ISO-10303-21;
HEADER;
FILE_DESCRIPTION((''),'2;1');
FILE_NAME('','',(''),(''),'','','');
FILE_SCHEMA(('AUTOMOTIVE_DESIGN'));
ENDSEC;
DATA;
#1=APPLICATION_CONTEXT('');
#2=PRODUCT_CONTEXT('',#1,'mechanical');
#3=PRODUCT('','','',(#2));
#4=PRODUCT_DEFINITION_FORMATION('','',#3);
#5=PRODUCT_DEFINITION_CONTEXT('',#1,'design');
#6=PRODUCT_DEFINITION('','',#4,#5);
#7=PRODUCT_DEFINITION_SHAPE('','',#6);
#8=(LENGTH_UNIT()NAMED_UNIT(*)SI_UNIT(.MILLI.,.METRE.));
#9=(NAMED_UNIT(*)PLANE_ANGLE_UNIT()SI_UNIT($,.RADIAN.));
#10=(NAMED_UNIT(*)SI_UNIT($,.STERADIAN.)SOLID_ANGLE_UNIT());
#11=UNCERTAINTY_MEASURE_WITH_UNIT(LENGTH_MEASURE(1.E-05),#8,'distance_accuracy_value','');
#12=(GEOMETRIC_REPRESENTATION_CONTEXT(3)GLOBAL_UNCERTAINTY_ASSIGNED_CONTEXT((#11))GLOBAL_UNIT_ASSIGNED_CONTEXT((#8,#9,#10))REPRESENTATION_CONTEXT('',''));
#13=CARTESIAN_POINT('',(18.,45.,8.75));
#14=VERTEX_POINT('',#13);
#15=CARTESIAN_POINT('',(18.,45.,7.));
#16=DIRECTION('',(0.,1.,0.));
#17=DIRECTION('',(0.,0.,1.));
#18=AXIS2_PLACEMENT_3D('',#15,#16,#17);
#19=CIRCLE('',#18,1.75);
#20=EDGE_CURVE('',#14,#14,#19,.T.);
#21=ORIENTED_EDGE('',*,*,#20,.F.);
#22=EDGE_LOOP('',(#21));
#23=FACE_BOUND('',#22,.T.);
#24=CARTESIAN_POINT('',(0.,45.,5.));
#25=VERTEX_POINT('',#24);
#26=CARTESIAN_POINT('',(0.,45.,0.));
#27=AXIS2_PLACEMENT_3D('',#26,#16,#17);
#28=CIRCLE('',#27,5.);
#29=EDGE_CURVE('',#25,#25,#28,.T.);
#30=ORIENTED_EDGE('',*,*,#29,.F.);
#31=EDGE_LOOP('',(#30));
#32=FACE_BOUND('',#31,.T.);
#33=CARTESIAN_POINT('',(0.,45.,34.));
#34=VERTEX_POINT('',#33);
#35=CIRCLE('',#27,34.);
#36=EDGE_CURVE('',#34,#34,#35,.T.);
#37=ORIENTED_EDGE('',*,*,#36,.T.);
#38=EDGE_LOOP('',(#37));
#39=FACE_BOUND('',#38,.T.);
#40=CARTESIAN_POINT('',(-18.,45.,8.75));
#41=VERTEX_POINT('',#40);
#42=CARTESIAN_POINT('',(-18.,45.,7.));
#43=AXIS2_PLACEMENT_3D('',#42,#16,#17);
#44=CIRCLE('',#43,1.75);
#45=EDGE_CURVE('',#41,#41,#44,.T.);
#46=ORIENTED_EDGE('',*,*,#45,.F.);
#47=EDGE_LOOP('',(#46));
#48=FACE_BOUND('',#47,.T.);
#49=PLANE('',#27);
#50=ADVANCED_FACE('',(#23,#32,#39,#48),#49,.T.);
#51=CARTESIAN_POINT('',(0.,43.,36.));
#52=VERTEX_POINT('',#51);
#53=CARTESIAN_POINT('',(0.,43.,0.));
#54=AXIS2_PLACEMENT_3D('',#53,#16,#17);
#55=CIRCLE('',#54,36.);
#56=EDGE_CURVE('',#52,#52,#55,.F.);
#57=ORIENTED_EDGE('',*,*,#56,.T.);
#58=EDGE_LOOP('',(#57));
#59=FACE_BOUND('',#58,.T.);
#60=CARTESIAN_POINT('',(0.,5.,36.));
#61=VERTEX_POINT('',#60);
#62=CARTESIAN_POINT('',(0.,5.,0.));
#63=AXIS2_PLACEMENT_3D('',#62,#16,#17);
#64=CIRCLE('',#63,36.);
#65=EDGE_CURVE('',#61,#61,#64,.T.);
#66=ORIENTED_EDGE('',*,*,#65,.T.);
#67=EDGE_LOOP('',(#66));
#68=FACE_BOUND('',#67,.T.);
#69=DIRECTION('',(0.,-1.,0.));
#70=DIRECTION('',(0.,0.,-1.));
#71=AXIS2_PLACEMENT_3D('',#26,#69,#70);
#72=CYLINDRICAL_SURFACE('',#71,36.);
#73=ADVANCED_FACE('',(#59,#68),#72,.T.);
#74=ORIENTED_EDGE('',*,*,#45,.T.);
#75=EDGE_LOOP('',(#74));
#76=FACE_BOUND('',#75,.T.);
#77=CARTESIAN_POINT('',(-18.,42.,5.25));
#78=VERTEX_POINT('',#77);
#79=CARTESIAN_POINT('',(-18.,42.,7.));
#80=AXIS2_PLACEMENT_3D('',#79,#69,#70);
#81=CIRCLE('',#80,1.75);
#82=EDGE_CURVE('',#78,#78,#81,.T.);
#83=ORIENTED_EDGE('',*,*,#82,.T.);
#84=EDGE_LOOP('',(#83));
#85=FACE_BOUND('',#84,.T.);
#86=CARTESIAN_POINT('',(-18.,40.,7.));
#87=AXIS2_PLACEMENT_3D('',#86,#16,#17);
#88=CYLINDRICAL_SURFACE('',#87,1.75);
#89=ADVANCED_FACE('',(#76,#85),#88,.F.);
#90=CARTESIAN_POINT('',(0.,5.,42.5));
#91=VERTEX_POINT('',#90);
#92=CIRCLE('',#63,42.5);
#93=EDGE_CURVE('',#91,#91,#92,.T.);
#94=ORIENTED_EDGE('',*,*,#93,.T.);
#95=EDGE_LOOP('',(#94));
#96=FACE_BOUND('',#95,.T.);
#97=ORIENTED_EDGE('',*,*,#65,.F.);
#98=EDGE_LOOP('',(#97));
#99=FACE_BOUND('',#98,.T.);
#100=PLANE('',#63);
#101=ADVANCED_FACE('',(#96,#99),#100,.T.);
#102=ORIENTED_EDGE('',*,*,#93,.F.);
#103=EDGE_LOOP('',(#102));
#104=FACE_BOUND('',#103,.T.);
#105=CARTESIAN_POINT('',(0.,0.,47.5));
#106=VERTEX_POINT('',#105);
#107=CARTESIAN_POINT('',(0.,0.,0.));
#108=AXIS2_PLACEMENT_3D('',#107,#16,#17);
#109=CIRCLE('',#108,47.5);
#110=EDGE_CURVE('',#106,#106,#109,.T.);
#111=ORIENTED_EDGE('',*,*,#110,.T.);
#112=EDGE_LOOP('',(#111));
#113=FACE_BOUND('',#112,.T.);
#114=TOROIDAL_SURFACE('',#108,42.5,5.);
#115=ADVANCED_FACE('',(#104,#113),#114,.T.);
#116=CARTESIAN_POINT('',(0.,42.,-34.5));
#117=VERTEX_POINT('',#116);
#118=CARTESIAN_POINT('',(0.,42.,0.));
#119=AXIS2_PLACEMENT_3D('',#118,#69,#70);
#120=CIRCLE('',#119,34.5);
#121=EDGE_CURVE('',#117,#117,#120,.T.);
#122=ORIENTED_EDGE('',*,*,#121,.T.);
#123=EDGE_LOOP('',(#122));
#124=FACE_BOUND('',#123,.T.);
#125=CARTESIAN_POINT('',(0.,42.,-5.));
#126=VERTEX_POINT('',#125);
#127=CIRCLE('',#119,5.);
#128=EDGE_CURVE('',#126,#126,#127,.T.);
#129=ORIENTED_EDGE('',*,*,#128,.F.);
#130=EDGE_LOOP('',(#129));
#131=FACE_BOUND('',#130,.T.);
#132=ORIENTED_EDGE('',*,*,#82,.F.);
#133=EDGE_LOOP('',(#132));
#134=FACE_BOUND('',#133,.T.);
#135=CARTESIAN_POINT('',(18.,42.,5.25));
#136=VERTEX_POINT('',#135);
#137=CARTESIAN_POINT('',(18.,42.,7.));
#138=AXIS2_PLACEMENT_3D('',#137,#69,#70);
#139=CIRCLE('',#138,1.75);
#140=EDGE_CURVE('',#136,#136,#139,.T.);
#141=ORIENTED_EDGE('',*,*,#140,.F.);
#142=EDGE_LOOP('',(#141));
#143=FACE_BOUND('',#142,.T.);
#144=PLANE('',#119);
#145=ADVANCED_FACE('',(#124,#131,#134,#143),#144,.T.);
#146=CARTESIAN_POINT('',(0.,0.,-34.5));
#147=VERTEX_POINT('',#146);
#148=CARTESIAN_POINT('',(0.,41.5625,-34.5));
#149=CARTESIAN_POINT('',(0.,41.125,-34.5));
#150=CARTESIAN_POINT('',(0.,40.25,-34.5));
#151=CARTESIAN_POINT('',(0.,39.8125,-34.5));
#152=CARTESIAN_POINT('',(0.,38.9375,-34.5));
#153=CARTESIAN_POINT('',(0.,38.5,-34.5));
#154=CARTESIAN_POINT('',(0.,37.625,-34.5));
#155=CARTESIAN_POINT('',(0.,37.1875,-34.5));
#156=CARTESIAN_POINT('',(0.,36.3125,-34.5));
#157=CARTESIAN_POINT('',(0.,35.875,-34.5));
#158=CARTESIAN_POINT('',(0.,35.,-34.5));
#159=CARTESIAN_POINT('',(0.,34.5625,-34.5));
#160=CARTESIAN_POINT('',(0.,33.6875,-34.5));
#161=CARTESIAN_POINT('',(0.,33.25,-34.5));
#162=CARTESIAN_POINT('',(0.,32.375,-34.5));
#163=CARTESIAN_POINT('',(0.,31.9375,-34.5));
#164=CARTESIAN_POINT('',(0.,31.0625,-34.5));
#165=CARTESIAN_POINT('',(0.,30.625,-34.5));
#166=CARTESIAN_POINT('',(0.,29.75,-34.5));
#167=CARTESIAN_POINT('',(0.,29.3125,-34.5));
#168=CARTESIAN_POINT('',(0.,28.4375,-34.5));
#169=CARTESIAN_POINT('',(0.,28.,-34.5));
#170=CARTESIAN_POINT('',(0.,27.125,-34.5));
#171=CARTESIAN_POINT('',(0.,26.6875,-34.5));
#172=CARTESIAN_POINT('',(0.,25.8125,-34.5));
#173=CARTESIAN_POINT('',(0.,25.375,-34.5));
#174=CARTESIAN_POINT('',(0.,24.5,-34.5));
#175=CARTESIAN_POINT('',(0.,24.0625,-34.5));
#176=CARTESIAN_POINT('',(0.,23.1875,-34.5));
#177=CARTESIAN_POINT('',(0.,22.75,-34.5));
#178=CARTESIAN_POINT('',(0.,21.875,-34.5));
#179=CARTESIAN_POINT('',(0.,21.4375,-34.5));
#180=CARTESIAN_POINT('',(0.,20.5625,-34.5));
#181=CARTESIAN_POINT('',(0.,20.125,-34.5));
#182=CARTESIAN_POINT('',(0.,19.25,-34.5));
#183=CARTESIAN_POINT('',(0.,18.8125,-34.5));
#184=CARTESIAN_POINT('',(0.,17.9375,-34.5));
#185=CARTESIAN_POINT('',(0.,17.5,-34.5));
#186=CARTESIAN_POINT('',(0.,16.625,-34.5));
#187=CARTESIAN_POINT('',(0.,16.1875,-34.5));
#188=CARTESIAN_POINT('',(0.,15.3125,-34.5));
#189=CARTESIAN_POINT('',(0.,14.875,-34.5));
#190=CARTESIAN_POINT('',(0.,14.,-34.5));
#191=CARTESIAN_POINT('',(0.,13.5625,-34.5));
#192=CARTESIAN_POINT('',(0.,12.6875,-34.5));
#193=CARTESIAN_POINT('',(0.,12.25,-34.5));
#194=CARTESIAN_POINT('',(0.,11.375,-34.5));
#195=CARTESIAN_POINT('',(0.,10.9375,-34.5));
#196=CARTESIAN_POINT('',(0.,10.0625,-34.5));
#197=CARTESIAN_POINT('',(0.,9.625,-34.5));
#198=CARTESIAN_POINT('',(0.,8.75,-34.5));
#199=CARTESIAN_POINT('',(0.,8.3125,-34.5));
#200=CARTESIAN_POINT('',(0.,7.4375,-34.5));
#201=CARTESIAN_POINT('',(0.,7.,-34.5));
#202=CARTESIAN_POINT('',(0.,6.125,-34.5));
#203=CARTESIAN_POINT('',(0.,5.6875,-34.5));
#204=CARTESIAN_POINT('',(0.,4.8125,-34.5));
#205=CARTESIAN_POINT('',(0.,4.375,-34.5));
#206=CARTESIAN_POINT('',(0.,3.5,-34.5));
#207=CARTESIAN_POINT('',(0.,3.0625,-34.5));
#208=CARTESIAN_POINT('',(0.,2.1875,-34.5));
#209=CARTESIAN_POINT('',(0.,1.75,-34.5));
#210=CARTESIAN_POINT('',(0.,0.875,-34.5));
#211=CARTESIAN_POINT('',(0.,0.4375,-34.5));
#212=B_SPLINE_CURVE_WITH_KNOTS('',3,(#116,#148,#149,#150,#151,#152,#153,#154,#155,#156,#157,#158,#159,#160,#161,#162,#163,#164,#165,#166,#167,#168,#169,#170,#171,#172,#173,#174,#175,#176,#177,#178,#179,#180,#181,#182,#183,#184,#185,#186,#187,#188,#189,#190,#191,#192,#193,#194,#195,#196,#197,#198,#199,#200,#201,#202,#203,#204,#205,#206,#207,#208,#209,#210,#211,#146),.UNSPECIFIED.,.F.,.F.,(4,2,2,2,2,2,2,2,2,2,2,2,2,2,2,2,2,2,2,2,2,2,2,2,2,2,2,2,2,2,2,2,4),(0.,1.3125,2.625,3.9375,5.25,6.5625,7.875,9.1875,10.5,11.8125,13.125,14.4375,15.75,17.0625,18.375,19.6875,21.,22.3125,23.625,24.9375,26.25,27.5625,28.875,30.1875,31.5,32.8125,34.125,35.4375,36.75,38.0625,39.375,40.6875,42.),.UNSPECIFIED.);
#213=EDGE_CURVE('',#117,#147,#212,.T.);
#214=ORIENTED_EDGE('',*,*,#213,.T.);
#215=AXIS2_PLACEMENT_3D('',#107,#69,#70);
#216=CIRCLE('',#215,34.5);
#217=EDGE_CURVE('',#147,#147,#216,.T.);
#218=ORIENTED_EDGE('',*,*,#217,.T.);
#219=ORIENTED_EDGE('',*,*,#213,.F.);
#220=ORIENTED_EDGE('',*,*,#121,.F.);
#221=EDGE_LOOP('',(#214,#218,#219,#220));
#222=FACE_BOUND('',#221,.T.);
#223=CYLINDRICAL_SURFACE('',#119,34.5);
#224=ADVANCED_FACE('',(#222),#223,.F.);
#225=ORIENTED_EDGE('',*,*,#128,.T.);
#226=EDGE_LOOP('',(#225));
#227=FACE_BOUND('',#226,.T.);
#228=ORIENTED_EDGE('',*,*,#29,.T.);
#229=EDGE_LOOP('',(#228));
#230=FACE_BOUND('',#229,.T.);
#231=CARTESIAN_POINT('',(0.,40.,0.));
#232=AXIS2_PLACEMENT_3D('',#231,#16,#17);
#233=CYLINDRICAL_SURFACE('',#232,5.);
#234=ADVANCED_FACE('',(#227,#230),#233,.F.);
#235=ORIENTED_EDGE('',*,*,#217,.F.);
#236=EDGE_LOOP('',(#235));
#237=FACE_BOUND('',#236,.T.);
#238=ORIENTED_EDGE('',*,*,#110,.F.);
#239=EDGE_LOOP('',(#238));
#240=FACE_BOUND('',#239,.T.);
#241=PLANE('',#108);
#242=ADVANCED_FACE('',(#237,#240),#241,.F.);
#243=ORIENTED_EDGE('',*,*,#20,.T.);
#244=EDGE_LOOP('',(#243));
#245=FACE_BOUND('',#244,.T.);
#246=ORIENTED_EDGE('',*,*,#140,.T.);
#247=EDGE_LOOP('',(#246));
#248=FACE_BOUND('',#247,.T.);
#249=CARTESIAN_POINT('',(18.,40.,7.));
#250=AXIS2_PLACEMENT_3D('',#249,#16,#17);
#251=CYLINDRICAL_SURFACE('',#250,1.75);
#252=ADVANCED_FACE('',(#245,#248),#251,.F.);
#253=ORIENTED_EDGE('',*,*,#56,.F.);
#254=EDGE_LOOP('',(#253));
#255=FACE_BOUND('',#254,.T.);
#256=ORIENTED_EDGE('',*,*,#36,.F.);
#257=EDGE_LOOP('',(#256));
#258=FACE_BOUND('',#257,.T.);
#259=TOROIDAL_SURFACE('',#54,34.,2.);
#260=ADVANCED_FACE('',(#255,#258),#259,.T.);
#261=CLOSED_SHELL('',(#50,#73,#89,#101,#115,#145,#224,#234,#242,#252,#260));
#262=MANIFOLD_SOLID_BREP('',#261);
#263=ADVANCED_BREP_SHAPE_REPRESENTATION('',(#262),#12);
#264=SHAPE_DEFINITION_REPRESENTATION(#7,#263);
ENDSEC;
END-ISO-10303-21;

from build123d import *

# Parameters (mm, degrees)
SKETCH1_R           = 47.5
BOSS_EXTRUDE1_DEPTH = 5
SKETCH2_R           = 36
BOSS_EXTRUDE2_DEPTH = 40
SKETCH3_R           = 34.5
CUT_EXTRUDE1_DEPTH  = 42
SKETCH4_R           = 5
CUT_EXTRUDE2_DEPTH  = 5
FILLET1_R           = 5
SKETCH5_R           = 1.75
CUT_EXTRUDE3_DEPTH  = 5
FILLET2_R           = 2


with BuildPart() as part:
    # Sketch1 → Boss-Extrude1 (new body)
    with BuildSketch(Plane(origin=(0, 0, 0), x_dir=(1, 0, 0), z_dir=(0, 1, 0))):
        with Locations(Location((0, 0, 0), (0, 0, 270))):
            Circle(SKETCH1_R)
    extrude(amount=BOSS_EXTRUDE1_DEPTH)

    # Sketch2 → Boss-Extrude2 (add)
    with BuildSketch(Plane(origin=(0, 5, 0), x_dir=(1, 0, 0), z_dir=(0, 1, 0))):
        with Locations(Location((0, 0, 0), (0, 0, 270))):
            Circle(SKETCH2_R)
    extrude(amount=BOSS_EXTRUDE2_DEPTH)

    # Sketch3 → Cut-Extrude1 (cut)
    with BuildSketch(Plane.XZ):
        with Locations(Location((0, 0, 0), (0, 0, 270))):
            Circle(SKETCH3_R)
    extrude(amount=-CUT_EXTRUDE1_DEPTH, mode=Mode.SUBTRACT)

    # Sketch4 → Cut-Extrude2 (cut)
    with BuildSketch(Plane(origin=(0, 45, 0), x_dir=(1, 0, 0), z_dir=(0, 1, 0))):
        with Locations(Location((0, 0, 0), (0, 0, 270))):
            Circle(SKETCH4_R)
    extrude(amount=-CUT_EXTRUDE2_DEPTH, mode=Mode.SUBTRACT)

    # Fillet1
    fillet1_edges = [part.edges().sort_by_distance(p)[0] for p in [
        (0, 5, -47.5),
    ]]
    fillet(fillet1_edges, radius=FILLET1_R - 0.0001)  # a hair under: the kernel refuses the full size

    # Sketch5 → Cut-Extrude3 (cut)
    with BuildSketch(Plane(origin=(0, 45, 0), x_dir=(1, 0, 0), z_dir=(0, 1, 0))):
        with Locations(Location((18, -7, 0), (0, 0, 270))):
            Circle(SKETCH5_R)
        with Locations(Location((-18, -7, 0), (0, 0, 270))):
            Circle(SKETCH5_R)
    extrude(amount=-CUT_EXTRUDE3_DEPTH, mode=Mode.SUBTRACT)

    # Fillet2
    fillet2_edges = [part.edges().sort_by_distance(p)[0] for p in [
        (0, 45, -36),
    ]]
    fillet(fillet2_edges, radius=FILLET2_R)


solid = part.part
